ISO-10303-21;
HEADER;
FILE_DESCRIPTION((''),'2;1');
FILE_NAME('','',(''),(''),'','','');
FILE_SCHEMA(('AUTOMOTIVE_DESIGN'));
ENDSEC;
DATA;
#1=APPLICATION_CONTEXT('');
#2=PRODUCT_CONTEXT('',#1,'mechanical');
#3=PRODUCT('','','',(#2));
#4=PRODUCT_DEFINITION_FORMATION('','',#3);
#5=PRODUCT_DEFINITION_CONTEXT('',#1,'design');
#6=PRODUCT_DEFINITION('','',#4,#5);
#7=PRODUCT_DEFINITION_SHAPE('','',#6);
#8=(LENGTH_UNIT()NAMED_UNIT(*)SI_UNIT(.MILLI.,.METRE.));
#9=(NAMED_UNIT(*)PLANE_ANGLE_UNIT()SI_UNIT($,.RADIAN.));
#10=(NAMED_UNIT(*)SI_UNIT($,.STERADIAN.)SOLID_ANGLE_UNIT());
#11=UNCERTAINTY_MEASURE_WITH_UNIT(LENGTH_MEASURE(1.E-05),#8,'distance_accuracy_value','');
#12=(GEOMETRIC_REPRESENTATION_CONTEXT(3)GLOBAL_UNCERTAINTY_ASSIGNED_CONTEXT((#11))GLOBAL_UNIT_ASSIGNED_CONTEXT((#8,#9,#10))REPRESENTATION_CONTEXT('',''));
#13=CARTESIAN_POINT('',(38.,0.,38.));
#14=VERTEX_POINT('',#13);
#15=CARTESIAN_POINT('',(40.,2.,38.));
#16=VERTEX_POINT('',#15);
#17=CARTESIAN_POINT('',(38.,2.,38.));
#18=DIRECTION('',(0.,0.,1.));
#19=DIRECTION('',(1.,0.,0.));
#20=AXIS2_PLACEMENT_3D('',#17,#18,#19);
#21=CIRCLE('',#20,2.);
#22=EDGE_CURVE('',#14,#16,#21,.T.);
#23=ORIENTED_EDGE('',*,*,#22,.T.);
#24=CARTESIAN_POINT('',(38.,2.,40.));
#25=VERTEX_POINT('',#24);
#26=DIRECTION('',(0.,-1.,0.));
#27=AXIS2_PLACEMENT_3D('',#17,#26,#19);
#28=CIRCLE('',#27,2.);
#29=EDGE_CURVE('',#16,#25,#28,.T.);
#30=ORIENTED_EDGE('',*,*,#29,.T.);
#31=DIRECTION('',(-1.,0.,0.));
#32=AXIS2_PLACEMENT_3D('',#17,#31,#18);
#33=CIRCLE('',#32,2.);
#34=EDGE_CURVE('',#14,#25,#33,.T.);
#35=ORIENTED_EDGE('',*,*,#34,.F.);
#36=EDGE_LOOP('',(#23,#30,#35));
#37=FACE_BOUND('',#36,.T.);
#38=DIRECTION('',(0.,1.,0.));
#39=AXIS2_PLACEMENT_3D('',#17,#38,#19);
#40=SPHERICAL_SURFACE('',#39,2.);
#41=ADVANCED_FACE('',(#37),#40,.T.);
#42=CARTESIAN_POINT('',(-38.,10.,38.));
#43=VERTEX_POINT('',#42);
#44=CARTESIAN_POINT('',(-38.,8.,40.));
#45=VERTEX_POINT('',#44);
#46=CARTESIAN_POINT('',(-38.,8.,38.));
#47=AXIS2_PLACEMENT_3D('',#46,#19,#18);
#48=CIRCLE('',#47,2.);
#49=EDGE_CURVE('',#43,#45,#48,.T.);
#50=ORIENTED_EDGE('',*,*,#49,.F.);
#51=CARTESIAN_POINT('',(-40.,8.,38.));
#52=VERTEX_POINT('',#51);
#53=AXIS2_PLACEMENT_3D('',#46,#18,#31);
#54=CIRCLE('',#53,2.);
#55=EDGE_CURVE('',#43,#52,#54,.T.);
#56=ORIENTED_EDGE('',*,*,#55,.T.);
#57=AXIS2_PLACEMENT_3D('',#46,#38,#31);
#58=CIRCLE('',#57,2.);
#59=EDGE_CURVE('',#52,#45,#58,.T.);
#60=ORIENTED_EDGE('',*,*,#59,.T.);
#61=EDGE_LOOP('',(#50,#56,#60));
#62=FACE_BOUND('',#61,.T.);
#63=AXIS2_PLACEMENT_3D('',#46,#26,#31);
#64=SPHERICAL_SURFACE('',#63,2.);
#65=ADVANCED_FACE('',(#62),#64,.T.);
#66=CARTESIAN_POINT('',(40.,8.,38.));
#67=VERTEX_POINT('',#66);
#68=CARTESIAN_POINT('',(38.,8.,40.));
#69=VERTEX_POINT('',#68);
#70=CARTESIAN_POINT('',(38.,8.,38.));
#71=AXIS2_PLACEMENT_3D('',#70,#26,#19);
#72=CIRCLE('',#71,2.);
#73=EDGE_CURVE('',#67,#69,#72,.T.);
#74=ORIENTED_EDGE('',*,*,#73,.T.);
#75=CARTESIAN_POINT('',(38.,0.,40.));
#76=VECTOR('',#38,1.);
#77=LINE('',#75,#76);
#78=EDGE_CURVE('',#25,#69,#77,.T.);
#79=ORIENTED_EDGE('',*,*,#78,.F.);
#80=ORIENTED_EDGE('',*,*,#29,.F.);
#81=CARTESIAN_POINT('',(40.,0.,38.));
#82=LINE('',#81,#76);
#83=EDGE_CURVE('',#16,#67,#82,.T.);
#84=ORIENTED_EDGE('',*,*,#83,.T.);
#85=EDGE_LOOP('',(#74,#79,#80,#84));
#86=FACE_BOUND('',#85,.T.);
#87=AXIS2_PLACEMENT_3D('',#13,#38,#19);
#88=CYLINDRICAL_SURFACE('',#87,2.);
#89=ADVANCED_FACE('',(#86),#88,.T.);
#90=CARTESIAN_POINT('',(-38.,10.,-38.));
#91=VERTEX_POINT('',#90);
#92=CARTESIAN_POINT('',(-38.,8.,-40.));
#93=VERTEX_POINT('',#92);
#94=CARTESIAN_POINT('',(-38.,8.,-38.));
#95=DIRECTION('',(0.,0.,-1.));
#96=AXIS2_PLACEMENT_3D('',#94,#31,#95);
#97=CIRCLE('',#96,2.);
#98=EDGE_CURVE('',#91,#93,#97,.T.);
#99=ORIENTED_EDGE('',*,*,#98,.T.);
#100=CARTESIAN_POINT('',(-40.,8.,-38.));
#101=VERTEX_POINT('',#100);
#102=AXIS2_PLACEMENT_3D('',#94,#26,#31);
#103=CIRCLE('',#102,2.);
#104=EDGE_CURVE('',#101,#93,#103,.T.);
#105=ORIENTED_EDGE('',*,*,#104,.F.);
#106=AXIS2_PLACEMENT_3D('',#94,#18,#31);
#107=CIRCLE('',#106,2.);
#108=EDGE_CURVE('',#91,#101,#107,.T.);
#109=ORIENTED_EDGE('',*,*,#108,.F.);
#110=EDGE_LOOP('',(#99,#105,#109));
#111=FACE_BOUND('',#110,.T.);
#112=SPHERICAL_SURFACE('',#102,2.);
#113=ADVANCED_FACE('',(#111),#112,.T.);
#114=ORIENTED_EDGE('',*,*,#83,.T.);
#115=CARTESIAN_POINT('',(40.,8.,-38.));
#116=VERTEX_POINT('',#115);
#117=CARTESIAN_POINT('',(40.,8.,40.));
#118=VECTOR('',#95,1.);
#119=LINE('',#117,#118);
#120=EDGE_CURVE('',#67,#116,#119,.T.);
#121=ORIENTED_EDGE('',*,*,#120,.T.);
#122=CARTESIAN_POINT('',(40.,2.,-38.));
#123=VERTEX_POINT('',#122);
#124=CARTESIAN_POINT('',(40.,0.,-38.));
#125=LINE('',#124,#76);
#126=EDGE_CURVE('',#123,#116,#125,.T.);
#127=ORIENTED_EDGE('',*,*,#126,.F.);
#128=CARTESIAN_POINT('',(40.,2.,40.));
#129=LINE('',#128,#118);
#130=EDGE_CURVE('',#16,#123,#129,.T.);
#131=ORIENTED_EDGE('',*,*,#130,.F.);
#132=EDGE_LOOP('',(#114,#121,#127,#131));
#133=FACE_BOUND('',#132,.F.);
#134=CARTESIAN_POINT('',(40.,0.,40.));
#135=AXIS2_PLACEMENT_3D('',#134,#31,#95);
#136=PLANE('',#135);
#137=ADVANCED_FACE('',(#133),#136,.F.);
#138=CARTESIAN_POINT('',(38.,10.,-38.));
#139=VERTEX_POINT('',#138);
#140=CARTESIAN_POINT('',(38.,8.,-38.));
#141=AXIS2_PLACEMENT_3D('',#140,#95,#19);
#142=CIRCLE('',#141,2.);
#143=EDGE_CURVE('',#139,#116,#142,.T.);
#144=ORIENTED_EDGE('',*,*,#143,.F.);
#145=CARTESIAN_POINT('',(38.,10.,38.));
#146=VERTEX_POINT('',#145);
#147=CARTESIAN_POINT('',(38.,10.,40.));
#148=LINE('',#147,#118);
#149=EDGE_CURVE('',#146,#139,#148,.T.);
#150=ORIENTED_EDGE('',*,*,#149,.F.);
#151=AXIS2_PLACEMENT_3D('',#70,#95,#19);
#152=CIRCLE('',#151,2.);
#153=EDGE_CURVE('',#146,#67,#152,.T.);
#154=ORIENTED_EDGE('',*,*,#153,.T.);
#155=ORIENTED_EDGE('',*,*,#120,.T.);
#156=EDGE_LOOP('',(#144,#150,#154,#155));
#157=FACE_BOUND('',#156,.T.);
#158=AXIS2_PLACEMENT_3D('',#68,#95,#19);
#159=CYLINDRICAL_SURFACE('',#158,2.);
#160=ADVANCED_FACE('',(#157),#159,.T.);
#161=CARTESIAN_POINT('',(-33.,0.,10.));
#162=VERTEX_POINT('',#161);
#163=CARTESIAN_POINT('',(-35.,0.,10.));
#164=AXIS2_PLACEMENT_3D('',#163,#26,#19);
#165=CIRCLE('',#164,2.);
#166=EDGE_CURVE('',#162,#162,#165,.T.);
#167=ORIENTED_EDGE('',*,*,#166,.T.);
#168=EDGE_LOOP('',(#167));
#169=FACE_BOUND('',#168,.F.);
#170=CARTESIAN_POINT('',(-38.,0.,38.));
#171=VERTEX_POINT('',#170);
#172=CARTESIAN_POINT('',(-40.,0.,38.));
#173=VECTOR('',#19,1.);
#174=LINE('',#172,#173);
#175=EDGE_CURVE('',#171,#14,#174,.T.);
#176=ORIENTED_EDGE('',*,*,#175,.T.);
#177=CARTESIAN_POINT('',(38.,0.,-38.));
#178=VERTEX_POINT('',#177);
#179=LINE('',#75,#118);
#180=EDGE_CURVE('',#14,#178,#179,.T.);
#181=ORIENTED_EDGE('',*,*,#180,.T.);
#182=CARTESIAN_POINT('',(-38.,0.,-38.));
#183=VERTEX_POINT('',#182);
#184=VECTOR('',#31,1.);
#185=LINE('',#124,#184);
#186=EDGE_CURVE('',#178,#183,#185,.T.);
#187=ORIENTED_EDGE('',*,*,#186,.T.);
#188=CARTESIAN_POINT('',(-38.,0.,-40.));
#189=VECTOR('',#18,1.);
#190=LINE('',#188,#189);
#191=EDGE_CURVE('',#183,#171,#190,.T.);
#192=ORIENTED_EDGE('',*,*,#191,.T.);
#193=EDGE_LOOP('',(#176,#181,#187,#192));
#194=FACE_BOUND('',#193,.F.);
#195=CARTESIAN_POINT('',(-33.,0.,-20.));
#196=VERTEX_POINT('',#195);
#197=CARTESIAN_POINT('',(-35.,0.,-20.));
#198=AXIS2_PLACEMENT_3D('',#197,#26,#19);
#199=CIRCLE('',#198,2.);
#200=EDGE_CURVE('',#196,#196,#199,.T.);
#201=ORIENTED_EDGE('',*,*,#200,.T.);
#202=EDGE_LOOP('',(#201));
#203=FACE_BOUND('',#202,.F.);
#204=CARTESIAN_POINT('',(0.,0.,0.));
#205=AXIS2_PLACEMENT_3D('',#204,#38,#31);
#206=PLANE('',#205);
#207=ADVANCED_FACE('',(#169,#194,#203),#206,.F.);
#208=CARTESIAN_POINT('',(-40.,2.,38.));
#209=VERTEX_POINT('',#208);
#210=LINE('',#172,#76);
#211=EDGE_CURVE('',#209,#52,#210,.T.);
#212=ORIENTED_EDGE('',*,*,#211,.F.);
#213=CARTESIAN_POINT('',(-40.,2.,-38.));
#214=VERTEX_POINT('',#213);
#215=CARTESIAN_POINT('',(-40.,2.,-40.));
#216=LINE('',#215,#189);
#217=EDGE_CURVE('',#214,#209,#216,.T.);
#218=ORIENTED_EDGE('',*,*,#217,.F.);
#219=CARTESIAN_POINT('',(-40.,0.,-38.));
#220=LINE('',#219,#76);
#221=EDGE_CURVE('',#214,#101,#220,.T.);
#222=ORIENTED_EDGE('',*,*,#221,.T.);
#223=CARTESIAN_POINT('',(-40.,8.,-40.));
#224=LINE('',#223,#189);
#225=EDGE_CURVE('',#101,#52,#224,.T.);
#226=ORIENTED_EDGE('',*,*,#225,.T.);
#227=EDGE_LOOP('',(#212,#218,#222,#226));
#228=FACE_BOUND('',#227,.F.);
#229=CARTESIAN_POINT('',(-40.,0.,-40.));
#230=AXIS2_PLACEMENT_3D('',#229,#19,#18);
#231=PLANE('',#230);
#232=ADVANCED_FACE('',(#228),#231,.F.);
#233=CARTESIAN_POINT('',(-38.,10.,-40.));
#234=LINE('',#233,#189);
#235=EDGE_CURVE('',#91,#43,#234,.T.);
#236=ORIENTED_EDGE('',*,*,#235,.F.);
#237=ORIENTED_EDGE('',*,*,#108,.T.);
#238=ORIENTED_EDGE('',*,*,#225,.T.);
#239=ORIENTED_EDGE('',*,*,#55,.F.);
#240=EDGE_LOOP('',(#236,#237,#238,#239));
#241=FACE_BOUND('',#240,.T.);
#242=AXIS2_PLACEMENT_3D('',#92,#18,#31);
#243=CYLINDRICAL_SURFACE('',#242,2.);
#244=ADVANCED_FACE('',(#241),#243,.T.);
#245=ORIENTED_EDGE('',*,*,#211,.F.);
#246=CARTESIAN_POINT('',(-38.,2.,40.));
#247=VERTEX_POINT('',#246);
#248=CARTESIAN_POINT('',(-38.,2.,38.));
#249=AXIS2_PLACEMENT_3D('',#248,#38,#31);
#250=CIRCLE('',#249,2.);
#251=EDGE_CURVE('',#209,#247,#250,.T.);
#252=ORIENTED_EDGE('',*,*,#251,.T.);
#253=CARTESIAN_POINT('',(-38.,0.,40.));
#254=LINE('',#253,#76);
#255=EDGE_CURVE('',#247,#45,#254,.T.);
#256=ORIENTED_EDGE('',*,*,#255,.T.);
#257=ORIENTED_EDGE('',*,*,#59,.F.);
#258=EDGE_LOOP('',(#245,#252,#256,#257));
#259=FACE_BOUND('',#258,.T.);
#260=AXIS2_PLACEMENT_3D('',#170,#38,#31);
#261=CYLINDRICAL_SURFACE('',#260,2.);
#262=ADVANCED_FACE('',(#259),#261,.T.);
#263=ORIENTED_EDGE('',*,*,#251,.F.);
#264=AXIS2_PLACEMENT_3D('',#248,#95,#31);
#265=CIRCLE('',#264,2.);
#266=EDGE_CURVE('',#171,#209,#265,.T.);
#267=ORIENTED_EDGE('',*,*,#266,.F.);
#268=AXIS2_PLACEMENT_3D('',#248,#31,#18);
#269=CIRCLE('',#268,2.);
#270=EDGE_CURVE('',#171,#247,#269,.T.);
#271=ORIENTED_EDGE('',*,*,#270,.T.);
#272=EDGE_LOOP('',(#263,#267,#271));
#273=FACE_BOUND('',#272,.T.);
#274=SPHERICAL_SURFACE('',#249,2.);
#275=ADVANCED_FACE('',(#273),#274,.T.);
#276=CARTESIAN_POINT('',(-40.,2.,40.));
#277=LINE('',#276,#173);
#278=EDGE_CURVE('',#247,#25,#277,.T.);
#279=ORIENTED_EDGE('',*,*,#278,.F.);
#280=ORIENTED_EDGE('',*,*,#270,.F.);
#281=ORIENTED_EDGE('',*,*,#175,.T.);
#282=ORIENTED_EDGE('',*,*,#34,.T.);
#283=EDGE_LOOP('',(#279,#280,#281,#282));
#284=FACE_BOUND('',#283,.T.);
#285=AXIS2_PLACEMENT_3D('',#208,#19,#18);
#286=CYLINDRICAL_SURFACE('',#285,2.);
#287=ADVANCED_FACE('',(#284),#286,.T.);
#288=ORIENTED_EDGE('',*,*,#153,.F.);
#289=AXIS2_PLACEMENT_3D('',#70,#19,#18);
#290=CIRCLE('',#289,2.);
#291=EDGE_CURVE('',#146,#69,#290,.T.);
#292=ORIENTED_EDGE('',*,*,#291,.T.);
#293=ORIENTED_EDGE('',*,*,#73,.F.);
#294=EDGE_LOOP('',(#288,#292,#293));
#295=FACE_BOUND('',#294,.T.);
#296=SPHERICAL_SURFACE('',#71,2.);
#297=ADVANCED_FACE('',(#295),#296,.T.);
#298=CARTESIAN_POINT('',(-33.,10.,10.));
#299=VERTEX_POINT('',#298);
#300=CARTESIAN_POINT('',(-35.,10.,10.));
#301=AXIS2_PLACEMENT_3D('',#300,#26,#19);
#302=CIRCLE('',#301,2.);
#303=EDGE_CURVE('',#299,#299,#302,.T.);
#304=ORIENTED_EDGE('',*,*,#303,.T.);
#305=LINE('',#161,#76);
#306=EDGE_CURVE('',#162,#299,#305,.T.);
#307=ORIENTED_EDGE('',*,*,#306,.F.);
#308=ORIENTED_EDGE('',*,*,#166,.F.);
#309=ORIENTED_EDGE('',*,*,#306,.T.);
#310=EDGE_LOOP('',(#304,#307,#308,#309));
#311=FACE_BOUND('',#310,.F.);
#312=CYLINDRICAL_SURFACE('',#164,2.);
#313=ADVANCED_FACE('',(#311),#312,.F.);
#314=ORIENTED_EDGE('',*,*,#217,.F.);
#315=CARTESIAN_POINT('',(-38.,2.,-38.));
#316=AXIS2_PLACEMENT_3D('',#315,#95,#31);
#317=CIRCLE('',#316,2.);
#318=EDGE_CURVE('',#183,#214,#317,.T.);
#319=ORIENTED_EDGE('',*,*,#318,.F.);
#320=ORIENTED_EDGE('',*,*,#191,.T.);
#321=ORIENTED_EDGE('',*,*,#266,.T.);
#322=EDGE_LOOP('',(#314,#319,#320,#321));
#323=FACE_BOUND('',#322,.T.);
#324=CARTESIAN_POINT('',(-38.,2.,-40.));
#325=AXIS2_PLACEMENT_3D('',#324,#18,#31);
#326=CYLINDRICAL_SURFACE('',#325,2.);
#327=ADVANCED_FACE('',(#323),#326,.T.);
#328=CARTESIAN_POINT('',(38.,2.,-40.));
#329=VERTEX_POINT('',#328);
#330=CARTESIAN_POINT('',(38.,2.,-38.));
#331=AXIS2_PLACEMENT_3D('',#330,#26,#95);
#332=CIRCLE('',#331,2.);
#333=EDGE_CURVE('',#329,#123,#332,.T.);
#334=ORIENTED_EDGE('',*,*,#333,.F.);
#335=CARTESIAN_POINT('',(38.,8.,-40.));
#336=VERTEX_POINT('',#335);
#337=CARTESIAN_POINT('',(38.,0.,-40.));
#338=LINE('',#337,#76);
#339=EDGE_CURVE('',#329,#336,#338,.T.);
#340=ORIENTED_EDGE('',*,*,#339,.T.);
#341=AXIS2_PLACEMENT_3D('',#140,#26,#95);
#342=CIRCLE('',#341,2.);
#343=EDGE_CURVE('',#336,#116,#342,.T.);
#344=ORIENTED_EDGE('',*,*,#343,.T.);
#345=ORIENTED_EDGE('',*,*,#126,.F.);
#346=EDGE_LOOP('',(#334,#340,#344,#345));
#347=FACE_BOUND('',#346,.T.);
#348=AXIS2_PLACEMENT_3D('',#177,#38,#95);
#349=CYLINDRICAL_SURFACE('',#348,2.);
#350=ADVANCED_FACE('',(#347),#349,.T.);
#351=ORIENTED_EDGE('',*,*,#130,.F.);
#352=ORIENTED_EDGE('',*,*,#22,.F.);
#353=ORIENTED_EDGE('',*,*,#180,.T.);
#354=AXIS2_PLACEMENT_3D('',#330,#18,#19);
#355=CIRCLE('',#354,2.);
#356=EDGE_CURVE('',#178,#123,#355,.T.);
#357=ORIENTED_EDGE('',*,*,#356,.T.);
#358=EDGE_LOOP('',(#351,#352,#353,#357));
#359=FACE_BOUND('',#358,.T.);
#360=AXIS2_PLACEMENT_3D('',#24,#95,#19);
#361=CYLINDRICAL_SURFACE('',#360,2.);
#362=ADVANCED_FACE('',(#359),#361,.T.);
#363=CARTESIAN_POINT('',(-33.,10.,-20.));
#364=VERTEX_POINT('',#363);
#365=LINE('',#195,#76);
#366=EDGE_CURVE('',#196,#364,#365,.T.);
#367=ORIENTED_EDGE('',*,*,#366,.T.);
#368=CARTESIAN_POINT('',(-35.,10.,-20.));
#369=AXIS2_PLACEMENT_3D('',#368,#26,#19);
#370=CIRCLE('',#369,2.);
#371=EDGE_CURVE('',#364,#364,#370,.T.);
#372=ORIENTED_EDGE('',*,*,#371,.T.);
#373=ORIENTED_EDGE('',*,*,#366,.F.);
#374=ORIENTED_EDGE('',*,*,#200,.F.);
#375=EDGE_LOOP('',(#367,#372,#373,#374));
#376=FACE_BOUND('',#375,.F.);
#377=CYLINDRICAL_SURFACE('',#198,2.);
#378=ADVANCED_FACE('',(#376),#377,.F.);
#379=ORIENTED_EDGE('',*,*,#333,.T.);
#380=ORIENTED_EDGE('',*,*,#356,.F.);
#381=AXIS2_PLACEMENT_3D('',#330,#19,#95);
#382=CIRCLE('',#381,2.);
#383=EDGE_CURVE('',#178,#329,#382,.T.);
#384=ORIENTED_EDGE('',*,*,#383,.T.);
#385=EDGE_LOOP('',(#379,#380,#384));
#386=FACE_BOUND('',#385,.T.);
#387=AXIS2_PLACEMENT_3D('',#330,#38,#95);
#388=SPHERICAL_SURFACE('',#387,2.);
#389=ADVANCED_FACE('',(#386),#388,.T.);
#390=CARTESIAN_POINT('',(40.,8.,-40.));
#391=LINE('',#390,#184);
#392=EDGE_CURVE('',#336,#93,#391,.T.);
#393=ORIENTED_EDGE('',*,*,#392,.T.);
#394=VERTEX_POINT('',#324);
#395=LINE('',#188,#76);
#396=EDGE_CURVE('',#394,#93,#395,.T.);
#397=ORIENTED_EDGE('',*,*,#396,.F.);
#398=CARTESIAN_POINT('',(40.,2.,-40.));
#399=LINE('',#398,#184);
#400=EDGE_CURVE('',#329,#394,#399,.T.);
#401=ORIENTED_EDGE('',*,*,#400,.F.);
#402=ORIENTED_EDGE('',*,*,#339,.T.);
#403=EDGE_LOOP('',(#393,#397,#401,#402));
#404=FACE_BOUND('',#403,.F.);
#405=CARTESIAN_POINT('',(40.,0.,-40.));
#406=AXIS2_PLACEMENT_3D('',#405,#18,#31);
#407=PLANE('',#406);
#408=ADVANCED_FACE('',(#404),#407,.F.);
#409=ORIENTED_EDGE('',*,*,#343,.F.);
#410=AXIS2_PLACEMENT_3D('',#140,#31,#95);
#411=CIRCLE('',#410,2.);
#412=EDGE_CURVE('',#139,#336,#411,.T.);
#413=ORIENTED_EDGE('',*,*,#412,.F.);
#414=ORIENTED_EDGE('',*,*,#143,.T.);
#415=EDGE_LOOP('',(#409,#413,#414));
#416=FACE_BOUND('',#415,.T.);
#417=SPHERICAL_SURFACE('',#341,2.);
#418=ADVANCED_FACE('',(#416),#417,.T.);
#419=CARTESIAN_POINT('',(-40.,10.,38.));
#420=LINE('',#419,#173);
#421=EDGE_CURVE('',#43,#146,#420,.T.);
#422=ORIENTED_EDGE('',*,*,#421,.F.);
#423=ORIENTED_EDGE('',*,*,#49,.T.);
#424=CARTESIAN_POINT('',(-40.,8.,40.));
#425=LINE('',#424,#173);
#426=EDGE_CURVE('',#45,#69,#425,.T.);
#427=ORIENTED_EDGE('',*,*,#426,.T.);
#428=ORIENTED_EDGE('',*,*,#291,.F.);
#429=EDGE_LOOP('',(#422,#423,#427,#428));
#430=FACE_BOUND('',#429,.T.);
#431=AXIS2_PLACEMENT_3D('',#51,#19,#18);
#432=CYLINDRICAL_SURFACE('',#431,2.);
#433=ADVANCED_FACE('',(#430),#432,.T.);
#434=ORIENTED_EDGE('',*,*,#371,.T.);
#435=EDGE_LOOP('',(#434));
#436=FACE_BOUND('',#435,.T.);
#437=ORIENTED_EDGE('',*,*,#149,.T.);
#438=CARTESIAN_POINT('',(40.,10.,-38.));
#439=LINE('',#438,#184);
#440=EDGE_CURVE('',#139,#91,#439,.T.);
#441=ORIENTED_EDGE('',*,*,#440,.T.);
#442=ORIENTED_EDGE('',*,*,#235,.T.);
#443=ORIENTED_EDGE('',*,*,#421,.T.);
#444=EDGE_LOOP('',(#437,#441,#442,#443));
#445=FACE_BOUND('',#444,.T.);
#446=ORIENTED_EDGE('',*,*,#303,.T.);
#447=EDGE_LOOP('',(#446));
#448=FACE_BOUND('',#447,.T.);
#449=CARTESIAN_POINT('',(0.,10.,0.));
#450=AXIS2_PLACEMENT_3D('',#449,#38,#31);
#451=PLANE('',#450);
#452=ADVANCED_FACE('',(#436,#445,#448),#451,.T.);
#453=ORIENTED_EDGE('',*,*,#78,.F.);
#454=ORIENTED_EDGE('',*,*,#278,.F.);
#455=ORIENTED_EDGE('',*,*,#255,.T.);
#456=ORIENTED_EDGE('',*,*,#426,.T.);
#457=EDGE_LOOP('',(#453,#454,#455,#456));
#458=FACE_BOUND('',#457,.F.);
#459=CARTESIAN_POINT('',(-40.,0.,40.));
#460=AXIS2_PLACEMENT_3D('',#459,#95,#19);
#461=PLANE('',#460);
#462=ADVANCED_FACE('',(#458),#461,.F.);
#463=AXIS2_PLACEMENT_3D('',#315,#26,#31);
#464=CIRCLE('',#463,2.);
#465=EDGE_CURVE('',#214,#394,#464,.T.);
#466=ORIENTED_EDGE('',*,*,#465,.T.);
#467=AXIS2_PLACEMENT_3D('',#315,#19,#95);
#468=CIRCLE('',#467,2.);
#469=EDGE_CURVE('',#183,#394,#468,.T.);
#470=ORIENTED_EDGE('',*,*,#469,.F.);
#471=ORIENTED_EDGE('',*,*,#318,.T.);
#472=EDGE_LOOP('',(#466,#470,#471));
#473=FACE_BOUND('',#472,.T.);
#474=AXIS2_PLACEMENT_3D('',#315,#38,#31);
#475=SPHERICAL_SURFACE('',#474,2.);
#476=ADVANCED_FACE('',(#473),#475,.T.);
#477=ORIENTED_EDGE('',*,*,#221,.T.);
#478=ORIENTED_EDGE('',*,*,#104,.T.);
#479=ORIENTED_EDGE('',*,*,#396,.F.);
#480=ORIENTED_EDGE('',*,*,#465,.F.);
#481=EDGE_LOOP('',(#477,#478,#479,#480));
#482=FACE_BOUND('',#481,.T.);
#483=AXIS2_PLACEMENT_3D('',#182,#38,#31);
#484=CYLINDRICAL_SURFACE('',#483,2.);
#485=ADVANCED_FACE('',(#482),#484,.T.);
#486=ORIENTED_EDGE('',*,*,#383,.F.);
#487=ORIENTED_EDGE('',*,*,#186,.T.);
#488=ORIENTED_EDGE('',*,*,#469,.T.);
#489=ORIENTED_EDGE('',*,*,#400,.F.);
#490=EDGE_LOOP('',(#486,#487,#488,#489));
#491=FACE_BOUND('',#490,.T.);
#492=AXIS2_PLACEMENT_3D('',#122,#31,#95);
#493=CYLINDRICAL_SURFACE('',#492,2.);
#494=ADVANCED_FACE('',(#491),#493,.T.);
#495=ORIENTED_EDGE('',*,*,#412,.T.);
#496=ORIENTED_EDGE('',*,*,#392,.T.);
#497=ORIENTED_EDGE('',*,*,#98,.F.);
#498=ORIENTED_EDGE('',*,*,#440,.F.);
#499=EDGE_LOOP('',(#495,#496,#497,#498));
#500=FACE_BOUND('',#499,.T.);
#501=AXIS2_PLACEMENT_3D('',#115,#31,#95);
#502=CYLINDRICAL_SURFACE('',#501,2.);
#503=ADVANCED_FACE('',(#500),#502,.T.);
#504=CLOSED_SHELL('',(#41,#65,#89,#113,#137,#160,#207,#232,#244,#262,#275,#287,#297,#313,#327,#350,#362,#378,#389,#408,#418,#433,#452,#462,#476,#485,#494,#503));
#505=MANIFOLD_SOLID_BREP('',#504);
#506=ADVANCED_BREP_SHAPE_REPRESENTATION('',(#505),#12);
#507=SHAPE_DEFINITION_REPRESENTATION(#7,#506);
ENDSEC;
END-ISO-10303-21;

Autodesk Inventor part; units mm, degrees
ref_plane "YZ Plane" through (0, 0, 0) normal (1, 0, 0) x (0, 1, 0)
ref_plane "XZ Plane" through (0, 0, 0) normal (0, 1, 0) x (-1, 0, 0)
ref_plane "XY Plane" through (0, 0, 0) normal (0, 0, 1) x (1, 0, 0)
sketch "草图1" plane through (0, 0, 0) normal (0, 1, 0) x (-1, 0, 0)
  line L0 (40, 40) -> (-40, 40)
  line L1 (-40, 40) -> (-40, -40)
  line L2 (-40, -40) -> (40, -40)
  line L3 (40, -40) -> (40, 40)
  point P0 (0, 0)
  dimension "d13" = 80
  dimension "d14" = 80
extrude "拉伸1" add sketch "草图1" along normal blind 10
fillet "圆角1" radius 2 12 edges at (-40, 5, -40) (-40, 5, 40) (-40, 0, 0) (-40, 10, 0) (40, 5, -40) (0, 0, -40) (0, 10, -40) (40, 5, 40) (40, 0, 0) (40, 10, 0) (0, 0, 40) (0, 10, 40)
sketch "草图4" plane through (0, 0, 0) normal (0, -1, 0) x (1, 0, 0)
  circle A0 centre (-35, -20) radius 2
  point P0 (0, 0)
  dimension "d15" = 4
extrude "拉伸4" cut sketch "草图4" against normal through all
sketch "草图5" plane through (0, 0, 0) normal (0, -1, 0) x (1, 0, 0)
  circle A0 centre (-35, 10) radius 2
  point P0 (0, 0)
  dimension "d18" = 4
extrude "拉伸5" cut sketch "草图5" against normal through all
properties part number "升降板"
